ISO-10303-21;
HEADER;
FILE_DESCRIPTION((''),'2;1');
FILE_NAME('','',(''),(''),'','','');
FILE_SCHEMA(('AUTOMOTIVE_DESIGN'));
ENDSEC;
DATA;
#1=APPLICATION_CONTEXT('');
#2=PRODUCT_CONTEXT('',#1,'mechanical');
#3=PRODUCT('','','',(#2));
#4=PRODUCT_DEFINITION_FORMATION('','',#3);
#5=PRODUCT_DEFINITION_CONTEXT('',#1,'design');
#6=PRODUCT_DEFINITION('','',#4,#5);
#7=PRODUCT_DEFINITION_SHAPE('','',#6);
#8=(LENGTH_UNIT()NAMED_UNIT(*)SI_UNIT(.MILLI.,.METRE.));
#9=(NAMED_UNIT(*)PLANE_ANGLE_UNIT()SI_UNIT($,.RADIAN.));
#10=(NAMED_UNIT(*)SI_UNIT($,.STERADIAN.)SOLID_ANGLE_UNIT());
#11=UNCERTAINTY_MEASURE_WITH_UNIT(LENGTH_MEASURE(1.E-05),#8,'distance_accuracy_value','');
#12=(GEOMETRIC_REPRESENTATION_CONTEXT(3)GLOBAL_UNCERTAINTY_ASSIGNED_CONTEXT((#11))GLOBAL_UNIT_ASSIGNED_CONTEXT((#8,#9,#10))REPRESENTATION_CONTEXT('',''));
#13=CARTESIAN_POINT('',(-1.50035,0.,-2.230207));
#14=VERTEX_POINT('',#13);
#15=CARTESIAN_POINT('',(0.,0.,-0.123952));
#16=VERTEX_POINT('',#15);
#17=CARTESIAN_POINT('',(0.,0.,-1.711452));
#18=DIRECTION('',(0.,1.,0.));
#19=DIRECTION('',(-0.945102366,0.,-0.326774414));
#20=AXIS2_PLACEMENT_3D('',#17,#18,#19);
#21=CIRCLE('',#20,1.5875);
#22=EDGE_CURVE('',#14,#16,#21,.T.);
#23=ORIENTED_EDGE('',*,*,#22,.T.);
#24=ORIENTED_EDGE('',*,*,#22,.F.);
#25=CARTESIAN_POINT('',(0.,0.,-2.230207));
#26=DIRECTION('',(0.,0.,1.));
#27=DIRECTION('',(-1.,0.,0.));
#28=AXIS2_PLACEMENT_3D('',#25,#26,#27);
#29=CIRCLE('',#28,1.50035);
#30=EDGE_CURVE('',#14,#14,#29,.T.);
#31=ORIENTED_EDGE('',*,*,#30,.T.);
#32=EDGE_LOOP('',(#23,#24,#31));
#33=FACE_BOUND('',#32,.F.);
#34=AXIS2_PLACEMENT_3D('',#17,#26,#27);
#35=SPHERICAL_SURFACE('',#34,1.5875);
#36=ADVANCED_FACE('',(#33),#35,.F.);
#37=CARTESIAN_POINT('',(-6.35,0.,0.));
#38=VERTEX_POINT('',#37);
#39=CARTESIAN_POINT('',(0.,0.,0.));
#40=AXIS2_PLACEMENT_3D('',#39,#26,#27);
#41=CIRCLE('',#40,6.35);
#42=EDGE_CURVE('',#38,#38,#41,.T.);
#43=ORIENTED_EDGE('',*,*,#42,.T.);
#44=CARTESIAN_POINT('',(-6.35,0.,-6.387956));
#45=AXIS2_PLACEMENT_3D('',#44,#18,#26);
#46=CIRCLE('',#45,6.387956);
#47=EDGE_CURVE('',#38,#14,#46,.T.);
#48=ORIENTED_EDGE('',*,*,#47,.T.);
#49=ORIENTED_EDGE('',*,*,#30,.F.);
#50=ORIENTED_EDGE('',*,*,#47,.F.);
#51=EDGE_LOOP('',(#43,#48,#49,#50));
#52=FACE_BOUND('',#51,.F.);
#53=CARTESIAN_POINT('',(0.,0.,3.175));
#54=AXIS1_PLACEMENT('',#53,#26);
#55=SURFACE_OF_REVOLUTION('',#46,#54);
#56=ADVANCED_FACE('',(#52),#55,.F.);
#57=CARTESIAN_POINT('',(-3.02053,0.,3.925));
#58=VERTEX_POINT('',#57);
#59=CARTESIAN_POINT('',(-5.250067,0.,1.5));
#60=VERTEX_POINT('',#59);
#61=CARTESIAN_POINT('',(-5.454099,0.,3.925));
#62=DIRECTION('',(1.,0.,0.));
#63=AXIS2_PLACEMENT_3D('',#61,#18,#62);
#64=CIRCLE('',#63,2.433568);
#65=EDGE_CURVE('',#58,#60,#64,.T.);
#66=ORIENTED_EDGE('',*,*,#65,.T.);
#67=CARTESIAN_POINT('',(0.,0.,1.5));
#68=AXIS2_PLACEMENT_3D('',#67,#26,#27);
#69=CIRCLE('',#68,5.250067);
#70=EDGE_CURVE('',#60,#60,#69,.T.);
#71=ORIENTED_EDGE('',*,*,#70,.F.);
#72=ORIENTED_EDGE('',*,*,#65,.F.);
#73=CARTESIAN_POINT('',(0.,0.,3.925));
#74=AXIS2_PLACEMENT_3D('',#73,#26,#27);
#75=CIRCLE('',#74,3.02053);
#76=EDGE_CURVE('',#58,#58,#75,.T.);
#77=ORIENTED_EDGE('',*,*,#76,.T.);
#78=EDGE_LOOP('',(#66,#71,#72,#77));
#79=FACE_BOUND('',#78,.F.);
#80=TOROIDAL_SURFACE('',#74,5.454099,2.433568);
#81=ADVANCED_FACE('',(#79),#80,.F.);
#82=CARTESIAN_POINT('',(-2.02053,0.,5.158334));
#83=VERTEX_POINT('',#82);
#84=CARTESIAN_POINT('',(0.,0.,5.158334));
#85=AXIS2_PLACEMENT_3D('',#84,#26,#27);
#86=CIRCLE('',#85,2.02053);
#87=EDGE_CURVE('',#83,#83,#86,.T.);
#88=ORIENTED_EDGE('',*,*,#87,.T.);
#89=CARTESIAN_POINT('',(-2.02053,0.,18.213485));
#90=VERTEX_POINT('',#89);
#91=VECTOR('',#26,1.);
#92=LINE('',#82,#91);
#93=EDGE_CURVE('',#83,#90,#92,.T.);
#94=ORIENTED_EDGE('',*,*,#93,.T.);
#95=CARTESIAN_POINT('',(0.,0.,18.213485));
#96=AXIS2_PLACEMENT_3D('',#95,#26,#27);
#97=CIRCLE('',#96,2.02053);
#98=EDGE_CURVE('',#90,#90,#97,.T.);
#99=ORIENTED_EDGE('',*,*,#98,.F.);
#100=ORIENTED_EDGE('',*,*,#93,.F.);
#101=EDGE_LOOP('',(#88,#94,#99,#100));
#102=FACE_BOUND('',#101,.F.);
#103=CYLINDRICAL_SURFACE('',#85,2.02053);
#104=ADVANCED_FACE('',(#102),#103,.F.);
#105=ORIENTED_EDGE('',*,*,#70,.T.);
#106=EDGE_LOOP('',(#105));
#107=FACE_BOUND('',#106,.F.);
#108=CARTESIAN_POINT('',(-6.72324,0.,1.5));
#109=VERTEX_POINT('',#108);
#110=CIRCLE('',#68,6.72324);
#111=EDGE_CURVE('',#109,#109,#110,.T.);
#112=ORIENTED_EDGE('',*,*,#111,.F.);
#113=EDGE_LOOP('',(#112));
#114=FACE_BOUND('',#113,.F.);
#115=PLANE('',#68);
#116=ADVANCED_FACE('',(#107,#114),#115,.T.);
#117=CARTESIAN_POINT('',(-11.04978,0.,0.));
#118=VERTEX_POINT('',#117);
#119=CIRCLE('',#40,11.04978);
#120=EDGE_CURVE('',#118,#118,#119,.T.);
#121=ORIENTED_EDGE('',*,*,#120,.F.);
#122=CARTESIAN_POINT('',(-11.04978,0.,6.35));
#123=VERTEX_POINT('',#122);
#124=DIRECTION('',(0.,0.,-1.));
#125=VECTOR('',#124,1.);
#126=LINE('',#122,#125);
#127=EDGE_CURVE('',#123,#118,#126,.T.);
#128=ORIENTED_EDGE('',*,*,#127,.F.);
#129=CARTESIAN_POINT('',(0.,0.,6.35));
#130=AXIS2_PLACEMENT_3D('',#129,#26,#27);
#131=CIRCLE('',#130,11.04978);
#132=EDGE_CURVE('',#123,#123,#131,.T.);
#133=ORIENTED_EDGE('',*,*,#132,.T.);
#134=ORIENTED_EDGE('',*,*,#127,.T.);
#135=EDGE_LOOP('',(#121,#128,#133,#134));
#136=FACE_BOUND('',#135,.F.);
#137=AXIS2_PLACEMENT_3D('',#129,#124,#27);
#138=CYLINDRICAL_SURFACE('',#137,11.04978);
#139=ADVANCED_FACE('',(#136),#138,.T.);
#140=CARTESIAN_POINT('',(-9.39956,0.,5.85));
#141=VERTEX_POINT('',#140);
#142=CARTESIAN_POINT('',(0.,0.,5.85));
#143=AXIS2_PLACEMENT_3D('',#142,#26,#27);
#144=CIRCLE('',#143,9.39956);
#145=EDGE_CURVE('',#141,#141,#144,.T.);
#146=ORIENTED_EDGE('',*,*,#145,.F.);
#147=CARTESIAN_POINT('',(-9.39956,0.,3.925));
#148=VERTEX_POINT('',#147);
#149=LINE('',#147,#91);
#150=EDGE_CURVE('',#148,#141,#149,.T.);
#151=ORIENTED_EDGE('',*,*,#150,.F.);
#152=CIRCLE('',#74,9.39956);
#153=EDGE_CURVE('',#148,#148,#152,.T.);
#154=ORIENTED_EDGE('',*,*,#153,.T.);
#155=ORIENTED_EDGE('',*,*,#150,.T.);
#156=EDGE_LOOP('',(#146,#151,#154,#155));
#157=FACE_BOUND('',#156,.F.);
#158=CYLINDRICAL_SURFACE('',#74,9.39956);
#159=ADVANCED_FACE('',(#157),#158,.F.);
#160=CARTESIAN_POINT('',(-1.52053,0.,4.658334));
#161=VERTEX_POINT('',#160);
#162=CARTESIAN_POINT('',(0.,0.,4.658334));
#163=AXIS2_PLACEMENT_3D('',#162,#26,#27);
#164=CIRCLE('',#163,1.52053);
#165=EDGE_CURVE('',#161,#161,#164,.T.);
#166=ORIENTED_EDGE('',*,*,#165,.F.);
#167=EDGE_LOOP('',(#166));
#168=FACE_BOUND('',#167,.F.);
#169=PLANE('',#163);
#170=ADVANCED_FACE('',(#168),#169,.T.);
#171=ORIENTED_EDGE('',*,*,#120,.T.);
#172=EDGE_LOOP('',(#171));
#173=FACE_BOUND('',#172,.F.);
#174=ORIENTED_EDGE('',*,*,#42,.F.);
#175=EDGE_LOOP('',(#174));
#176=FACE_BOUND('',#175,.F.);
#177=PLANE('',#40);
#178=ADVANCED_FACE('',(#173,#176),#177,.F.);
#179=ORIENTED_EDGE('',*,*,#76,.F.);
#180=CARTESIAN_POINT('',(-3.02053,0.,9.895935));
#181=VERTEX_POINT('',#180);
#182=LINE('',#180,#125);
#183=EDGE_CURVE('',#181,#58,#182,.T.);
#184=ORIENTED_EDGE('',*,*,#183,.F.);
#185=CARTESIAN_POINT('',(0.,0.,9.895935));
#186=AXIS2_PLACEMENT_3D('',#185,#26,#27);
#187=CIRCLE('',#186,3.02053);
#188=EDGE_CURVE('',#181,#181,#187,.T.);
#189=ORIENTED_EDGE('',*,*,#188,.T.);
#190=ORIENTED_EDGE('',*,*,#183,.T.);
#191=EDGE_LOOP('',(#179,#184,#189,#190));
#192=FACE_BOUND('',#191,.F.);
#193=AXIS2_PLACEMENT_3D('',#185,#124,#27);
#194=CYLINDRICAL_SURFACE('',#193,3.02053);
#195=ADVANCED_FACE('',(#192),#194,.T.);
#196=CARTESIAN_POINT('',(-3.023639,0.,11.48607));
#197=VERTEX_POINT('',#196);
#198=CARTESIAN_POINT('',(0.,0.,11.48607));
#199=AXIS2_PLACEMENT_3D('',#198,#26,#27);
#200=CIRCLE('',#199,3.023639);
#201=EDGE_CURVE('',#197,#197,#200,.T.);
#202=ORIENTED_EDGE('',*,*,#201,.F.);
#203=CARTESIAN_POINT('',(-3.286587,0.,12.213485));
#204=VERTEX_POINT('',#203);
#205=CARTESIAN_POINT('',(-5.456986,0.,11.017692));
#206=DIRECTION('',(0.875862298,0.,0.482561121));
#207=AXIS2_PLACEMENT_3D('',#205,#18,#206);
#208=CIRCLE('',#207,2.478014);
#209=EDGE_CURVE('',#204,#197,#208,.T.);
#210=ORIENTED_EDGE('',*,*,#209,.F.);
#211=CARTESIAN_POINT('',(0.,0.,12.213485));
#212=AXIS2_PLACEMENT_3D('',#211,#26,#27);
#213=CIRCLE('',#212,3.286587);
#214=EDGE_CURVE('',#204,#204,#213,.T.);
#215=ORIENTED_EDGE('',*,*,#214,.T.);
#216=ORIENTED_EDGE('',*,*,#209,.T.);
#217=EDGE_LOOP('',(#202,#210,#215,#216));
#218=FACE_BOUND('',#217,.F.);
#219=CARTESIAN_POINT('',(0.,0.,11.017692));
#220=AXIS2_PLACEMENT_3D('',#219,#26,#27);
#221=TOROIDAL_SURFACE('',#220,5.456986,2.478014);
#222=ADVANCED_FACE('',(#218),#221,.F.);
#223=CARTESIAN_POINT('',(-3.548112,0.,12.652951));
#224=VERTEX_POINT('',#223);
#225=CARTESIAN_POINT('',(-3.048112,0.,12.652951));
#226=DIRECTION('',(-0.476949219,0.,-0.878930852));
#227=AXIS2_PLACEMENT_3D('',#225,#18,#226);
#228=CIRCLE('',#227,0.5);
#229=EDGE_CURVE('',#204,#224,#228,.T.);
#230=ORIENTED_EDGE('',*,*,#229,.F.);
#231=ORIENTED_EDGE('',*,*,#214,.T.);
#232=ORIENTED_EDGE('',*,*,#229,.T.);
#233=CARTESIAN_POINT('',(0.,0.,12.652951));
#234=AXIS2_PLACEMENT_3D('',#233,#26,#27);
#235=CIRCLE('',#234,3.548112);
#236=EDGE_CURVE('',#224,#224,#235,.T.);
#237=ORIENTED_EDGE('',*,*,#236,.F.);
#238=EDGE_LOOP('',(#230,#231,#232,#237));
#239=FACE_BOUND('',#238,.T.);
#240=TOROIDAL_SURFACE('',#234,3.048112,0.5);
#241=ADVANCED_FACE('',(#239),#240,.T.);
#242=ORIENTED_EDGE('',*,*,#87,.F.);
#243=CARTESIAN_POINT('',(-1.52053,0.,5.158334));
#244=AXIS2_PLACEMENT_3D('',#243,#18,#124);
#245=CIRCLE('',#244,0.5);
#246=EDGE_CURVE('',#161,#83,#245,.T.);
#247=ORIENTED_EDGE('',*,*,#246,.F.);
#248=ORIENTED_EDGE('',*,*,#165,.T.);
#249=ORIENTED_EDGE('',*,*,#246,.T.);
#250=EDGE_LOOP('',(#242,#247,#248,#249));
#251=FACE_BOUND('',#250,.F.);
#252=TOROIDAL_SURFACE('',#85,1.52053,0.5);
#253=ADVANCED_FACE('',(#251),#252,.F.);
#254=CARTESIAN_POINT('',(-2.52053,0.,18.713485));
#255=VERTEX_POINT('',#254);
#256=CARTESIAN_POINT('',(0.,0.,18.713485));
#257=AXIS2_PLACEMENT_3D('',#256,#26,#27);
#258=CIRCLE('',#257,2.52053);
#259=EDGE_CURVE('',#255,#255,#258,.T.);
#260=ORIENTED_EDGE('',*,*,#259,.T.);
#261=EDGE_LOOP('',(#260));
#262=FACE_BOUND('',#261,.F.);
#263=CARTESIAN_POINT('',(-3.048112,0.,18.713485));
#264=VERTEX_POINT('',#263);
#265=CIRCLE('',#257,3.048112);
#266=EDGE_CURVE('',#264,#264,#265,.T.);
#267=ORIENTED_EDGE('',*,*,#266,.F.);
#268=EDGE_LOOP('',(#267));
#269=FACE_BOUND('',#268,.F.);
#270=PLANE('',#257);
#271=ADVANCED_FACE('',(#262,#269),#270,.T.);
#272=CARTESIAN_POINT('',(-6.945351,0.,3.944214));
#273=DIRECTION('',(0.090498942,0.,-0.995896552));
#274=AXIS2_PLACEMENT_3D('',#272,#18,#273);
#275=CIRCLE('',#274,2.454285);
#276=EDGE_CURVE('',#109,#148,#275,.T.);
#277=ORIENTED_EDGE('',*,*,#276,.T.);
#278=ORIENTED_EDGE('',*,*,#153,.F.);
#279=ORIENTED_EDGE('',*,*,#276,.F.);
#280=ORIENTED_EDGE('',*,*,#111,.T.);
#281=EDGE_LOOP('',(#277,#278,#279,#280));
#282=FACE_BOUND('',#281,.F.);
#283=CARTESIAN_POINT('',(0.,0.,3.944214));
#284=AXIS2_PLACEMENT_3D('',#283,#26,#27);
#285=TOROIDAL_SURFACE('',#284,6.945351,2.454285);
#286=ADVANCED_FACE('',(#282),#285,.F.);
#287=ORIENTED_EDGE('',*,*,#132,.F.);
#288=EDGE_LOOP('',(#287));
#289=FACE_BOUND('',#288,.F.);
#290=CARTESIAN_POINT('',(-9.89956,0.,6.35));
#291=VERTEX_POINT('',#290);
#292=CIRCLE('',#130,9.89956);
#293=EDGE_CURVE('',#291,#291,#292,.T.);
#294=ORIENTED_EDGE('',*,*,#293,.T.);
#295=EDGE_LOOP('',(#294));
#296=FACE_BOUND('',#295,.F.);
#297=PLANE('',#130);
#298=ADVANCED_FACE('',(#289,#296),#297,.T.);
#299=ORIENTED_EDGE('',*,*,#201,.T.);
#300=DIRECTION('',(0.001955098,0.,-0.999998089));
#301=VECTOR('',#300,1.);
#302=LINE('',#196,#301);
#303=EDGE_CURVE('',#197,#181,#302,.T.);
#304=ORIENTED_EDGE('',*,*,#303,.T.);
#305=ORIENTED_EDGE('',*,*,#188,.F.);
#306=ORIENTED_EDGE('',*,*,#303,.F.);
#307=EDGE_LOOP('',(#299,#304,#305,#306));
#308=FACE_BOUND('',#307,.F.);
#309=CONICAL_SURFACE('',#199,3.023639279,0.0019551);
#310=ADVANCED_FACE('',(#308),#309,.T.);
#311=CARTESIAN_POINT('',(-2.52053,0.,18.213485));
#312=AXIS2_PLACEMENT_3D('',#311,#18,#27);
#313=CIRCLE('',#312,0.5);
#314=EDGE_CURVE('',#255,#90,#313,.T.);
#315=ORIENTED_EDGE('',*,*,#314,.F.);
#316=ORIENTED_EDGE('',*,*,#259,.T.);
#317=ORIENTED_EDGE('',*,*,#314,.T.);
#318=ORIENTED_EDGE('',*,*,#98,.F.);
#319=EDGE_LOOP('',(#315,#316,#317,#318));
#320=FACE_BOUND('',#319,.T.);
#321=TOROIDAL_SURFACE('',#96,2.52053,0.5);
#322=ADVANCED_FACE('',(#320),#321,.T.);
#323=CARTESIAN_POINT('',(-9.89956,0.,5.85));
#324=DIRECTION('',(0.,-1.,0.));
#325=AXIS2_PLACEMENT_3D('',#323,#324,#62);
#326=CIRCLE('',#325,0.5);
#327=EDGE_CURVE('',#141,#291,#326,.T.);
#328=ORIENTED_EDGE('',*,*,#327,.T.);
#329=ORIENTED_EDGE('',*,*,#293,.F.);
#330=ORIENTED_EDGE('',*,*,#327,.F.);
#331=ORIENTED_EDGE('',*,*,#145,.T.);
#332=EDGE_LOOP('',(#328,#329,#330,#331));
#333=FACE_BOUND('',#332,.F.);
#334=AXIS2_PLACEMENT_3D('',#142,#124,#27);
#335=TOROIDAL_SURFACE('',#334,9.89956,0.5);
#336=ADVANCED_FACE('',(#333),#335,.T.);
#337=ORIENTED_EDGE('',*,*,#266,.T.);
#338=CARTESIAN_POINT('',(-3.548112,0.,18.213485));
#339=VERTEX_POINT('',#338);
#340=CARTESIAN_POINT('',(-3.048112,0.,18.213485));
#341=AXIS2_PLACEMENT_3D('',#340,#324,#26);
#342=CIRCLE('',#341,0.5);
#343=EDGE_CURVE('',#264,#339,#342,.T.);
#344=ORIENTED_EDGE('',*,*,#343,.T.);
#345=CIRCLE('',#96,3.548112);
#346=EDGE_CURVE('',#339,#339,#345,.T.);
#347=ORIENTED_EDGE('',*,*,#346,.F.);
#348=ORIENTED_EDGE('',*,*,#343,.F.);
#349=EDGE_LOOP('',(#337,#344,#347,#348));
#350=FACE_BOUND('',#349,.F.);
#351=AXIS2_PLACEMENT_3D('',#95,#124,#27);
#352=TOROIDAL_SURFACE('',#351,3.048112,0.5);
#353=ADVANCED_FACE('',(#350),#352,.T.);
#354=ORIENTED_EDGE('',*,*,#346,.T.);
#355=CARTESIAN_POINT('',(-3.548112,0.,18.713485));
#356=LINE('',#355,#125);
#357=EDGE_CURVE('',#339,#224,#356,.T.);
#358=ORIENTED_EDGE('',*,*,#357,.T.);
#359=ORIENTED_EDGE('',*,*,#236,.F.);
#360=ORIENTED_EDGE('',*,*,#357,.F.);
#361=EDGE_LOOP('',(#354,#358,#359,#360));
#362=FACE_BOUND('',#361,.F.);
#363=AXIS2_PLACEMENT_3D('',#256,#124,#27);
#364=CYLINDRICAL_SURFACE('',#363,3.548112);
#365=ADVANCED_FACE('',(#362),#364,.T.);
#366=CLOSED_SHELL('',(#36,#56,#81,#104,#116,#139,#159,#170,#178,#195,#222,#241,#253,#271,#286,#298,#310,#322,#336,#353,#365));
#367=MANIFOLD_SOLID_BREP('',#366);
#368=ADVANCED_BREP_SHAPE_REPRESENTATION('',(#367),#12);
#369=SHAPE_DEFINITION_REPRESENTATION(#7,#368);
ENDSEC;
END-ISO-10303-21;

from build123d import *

# Parameters (mm, degrees)
F3_R = 0.5


# Not quite as in the source:
# - a fillet or chamfer that OpenCascade refuses, or shapes differently, is made with other operations: its cross-section is extruded or revolved along the edge and cut away or added
# - a feature names something its author has since deleted; it is built from what else it names


with BuildPart() as f1:
    # F0 (on Front) → F1 (revolve)
    with BuildSketch(Plane.XZ):
        with BuildLine():
            Line((-11.0497801401, 0), (-6.35, 0))
            ThreePointArc((-6.35, 0), (-3.6810616685, -0.5842717783), (-1.5003500059, -2.2302067626))
            ThreePointArc((-1.5003500059, -2.2302067626), (-1.292996294, -0.7904112116), (0, -0.1239523798))
            Line((0, -0.1239523798), (0, 0))
            Line((0, 0), (0, 4.6583339572))
            Line((0, 4.6583339572), (-1.5205304027, 4.6583339572))
            ThreePointArc((-1.5205304027, 4.6583339572), (-1.8740837933, 4.8047805666), (-2.0205304027, 5.1583339572))
            Line((-2.0205304027, 5.1583339572), (-2.0205304027, 18.7134853154))
            Line((-2.0205304027, 18.7134853154), (-3.0250614509, 18.7134853154))
            Line((-3.0250614509, 18.7134853154), (-3.5481122322, 18.7134853154))
            Line((-3.5481122322, 18.7134853154), (-3.5481122322, 12.2134853154))
            Line((-3.5481122322, 12.2134853154), (-3.2865868416, 12.2134853154))
            ThreePointArc((-3.2865868416, 12.2134853154), (-3.1265563478, 11.8601003085), (-3.0236392793, 11.4860698297))
            Line((-3.0236392793, 11.4860698297), (-3.0205304027, 9.8959347233))
            Line((-3.0205304027, 9.8959347233), (-3.0205304027, 3.925))
            ThreePointArc((-3.0205304027, 3.925), (-3.6626216951, 2.2779224085), (-5.2500669844, 1.5))
            Line((-5.2500669844, 1.5), (-6.7232404836, 1.5))
            ThreePointArc((-6.7232404836, 1.5), (-8.5932958155, 2.1254805036), (-9.3995602801, 3.925))
            Line((-9.3995602801, 3.925), (-9.3995602801, 5.85))
            ThreePointArc((-9.3995602801, 5.85), (-9.5460068896, 6.2035533906), (-9.8995602801, 6.35))
            Line((-9.8995602801, 6.35), (-11.0497801401, 6.35))
            Line((-11.0497801401, 6.35), (-11.0497801401, 0))
        make_face()
    revolve(axis=Axis((0, 0, 3.175), (0, 0, 1)))

    # F2: fillet of radius 0.5 on 2 edges, made by hand

    # F2_s1 → F2_t2 (revolve, cut)
    with BuildSketch(Plane.XZ):
        with BuildLine():
            ThreePointArc((-3.0481122322, 18.7134853154), (-3.4016656228, 18.567038706), (-3.5481122322, 18.2134853154))
            Line((-3.5481122322, 18.2134853154), (-3.5581122322, 18.2134853154))
            Line((-3.5581122322, 18.2134853154), (-3.5581122322, 18.7234853154))
            Line((-3.5581122322, 18.7234853154), (-3.0481122322, 18.7234853154))
            Line((-3.0481122322, 18.7234853154), (-3.0481122322, 18.7134853154))
        make_face()
    revolve(axis=Axis((0, 0, 18.7134853154), (0, 0, 1)), mode=Mode.SUBTRACT)

    # F2_s3 → F2_t4 (revolve, cut)
    with BuildSketch(Plane.XZ):
        with BuildLine():
            ThreePointArc((-3.2865868416, 12.2134853154), (-3.4777849592, 12.3972529753), (-3.5481122322, 12.6529507415))
            Line((-3.5481122322, 12.6529507415), (-3.5581122322, 12.6529507415))
            Line((-3.5581122322, 12.6529507415), (-3.5581122322, 12.2134853154))
            Line((-3.5581122322, 12.2134853154), (-3.5481122322, 12.2034853154))
            ThreePointArc((-3.5481122322, 12.2034853154), (-3.4173495369, 12.2034853154), (-3.2913563338, 12.2046960069))
            Line((-3.2913563338, 12.2046960069), (-3.2865868416, 12.2134853154))
        make_face()
    revolve(axis=Axis((0, 0, 12.2134853154), (0, 0, 1)), mode=Mode.SUBTRACT)

    # F3
    f3_edges = [f1.edges().sort_by_distance(p)[0] for p in [
        (2.02053, 0, 18.713485),
    ]]
    fillet(f3_edges, radius=F3_R)


solid = f1.part
